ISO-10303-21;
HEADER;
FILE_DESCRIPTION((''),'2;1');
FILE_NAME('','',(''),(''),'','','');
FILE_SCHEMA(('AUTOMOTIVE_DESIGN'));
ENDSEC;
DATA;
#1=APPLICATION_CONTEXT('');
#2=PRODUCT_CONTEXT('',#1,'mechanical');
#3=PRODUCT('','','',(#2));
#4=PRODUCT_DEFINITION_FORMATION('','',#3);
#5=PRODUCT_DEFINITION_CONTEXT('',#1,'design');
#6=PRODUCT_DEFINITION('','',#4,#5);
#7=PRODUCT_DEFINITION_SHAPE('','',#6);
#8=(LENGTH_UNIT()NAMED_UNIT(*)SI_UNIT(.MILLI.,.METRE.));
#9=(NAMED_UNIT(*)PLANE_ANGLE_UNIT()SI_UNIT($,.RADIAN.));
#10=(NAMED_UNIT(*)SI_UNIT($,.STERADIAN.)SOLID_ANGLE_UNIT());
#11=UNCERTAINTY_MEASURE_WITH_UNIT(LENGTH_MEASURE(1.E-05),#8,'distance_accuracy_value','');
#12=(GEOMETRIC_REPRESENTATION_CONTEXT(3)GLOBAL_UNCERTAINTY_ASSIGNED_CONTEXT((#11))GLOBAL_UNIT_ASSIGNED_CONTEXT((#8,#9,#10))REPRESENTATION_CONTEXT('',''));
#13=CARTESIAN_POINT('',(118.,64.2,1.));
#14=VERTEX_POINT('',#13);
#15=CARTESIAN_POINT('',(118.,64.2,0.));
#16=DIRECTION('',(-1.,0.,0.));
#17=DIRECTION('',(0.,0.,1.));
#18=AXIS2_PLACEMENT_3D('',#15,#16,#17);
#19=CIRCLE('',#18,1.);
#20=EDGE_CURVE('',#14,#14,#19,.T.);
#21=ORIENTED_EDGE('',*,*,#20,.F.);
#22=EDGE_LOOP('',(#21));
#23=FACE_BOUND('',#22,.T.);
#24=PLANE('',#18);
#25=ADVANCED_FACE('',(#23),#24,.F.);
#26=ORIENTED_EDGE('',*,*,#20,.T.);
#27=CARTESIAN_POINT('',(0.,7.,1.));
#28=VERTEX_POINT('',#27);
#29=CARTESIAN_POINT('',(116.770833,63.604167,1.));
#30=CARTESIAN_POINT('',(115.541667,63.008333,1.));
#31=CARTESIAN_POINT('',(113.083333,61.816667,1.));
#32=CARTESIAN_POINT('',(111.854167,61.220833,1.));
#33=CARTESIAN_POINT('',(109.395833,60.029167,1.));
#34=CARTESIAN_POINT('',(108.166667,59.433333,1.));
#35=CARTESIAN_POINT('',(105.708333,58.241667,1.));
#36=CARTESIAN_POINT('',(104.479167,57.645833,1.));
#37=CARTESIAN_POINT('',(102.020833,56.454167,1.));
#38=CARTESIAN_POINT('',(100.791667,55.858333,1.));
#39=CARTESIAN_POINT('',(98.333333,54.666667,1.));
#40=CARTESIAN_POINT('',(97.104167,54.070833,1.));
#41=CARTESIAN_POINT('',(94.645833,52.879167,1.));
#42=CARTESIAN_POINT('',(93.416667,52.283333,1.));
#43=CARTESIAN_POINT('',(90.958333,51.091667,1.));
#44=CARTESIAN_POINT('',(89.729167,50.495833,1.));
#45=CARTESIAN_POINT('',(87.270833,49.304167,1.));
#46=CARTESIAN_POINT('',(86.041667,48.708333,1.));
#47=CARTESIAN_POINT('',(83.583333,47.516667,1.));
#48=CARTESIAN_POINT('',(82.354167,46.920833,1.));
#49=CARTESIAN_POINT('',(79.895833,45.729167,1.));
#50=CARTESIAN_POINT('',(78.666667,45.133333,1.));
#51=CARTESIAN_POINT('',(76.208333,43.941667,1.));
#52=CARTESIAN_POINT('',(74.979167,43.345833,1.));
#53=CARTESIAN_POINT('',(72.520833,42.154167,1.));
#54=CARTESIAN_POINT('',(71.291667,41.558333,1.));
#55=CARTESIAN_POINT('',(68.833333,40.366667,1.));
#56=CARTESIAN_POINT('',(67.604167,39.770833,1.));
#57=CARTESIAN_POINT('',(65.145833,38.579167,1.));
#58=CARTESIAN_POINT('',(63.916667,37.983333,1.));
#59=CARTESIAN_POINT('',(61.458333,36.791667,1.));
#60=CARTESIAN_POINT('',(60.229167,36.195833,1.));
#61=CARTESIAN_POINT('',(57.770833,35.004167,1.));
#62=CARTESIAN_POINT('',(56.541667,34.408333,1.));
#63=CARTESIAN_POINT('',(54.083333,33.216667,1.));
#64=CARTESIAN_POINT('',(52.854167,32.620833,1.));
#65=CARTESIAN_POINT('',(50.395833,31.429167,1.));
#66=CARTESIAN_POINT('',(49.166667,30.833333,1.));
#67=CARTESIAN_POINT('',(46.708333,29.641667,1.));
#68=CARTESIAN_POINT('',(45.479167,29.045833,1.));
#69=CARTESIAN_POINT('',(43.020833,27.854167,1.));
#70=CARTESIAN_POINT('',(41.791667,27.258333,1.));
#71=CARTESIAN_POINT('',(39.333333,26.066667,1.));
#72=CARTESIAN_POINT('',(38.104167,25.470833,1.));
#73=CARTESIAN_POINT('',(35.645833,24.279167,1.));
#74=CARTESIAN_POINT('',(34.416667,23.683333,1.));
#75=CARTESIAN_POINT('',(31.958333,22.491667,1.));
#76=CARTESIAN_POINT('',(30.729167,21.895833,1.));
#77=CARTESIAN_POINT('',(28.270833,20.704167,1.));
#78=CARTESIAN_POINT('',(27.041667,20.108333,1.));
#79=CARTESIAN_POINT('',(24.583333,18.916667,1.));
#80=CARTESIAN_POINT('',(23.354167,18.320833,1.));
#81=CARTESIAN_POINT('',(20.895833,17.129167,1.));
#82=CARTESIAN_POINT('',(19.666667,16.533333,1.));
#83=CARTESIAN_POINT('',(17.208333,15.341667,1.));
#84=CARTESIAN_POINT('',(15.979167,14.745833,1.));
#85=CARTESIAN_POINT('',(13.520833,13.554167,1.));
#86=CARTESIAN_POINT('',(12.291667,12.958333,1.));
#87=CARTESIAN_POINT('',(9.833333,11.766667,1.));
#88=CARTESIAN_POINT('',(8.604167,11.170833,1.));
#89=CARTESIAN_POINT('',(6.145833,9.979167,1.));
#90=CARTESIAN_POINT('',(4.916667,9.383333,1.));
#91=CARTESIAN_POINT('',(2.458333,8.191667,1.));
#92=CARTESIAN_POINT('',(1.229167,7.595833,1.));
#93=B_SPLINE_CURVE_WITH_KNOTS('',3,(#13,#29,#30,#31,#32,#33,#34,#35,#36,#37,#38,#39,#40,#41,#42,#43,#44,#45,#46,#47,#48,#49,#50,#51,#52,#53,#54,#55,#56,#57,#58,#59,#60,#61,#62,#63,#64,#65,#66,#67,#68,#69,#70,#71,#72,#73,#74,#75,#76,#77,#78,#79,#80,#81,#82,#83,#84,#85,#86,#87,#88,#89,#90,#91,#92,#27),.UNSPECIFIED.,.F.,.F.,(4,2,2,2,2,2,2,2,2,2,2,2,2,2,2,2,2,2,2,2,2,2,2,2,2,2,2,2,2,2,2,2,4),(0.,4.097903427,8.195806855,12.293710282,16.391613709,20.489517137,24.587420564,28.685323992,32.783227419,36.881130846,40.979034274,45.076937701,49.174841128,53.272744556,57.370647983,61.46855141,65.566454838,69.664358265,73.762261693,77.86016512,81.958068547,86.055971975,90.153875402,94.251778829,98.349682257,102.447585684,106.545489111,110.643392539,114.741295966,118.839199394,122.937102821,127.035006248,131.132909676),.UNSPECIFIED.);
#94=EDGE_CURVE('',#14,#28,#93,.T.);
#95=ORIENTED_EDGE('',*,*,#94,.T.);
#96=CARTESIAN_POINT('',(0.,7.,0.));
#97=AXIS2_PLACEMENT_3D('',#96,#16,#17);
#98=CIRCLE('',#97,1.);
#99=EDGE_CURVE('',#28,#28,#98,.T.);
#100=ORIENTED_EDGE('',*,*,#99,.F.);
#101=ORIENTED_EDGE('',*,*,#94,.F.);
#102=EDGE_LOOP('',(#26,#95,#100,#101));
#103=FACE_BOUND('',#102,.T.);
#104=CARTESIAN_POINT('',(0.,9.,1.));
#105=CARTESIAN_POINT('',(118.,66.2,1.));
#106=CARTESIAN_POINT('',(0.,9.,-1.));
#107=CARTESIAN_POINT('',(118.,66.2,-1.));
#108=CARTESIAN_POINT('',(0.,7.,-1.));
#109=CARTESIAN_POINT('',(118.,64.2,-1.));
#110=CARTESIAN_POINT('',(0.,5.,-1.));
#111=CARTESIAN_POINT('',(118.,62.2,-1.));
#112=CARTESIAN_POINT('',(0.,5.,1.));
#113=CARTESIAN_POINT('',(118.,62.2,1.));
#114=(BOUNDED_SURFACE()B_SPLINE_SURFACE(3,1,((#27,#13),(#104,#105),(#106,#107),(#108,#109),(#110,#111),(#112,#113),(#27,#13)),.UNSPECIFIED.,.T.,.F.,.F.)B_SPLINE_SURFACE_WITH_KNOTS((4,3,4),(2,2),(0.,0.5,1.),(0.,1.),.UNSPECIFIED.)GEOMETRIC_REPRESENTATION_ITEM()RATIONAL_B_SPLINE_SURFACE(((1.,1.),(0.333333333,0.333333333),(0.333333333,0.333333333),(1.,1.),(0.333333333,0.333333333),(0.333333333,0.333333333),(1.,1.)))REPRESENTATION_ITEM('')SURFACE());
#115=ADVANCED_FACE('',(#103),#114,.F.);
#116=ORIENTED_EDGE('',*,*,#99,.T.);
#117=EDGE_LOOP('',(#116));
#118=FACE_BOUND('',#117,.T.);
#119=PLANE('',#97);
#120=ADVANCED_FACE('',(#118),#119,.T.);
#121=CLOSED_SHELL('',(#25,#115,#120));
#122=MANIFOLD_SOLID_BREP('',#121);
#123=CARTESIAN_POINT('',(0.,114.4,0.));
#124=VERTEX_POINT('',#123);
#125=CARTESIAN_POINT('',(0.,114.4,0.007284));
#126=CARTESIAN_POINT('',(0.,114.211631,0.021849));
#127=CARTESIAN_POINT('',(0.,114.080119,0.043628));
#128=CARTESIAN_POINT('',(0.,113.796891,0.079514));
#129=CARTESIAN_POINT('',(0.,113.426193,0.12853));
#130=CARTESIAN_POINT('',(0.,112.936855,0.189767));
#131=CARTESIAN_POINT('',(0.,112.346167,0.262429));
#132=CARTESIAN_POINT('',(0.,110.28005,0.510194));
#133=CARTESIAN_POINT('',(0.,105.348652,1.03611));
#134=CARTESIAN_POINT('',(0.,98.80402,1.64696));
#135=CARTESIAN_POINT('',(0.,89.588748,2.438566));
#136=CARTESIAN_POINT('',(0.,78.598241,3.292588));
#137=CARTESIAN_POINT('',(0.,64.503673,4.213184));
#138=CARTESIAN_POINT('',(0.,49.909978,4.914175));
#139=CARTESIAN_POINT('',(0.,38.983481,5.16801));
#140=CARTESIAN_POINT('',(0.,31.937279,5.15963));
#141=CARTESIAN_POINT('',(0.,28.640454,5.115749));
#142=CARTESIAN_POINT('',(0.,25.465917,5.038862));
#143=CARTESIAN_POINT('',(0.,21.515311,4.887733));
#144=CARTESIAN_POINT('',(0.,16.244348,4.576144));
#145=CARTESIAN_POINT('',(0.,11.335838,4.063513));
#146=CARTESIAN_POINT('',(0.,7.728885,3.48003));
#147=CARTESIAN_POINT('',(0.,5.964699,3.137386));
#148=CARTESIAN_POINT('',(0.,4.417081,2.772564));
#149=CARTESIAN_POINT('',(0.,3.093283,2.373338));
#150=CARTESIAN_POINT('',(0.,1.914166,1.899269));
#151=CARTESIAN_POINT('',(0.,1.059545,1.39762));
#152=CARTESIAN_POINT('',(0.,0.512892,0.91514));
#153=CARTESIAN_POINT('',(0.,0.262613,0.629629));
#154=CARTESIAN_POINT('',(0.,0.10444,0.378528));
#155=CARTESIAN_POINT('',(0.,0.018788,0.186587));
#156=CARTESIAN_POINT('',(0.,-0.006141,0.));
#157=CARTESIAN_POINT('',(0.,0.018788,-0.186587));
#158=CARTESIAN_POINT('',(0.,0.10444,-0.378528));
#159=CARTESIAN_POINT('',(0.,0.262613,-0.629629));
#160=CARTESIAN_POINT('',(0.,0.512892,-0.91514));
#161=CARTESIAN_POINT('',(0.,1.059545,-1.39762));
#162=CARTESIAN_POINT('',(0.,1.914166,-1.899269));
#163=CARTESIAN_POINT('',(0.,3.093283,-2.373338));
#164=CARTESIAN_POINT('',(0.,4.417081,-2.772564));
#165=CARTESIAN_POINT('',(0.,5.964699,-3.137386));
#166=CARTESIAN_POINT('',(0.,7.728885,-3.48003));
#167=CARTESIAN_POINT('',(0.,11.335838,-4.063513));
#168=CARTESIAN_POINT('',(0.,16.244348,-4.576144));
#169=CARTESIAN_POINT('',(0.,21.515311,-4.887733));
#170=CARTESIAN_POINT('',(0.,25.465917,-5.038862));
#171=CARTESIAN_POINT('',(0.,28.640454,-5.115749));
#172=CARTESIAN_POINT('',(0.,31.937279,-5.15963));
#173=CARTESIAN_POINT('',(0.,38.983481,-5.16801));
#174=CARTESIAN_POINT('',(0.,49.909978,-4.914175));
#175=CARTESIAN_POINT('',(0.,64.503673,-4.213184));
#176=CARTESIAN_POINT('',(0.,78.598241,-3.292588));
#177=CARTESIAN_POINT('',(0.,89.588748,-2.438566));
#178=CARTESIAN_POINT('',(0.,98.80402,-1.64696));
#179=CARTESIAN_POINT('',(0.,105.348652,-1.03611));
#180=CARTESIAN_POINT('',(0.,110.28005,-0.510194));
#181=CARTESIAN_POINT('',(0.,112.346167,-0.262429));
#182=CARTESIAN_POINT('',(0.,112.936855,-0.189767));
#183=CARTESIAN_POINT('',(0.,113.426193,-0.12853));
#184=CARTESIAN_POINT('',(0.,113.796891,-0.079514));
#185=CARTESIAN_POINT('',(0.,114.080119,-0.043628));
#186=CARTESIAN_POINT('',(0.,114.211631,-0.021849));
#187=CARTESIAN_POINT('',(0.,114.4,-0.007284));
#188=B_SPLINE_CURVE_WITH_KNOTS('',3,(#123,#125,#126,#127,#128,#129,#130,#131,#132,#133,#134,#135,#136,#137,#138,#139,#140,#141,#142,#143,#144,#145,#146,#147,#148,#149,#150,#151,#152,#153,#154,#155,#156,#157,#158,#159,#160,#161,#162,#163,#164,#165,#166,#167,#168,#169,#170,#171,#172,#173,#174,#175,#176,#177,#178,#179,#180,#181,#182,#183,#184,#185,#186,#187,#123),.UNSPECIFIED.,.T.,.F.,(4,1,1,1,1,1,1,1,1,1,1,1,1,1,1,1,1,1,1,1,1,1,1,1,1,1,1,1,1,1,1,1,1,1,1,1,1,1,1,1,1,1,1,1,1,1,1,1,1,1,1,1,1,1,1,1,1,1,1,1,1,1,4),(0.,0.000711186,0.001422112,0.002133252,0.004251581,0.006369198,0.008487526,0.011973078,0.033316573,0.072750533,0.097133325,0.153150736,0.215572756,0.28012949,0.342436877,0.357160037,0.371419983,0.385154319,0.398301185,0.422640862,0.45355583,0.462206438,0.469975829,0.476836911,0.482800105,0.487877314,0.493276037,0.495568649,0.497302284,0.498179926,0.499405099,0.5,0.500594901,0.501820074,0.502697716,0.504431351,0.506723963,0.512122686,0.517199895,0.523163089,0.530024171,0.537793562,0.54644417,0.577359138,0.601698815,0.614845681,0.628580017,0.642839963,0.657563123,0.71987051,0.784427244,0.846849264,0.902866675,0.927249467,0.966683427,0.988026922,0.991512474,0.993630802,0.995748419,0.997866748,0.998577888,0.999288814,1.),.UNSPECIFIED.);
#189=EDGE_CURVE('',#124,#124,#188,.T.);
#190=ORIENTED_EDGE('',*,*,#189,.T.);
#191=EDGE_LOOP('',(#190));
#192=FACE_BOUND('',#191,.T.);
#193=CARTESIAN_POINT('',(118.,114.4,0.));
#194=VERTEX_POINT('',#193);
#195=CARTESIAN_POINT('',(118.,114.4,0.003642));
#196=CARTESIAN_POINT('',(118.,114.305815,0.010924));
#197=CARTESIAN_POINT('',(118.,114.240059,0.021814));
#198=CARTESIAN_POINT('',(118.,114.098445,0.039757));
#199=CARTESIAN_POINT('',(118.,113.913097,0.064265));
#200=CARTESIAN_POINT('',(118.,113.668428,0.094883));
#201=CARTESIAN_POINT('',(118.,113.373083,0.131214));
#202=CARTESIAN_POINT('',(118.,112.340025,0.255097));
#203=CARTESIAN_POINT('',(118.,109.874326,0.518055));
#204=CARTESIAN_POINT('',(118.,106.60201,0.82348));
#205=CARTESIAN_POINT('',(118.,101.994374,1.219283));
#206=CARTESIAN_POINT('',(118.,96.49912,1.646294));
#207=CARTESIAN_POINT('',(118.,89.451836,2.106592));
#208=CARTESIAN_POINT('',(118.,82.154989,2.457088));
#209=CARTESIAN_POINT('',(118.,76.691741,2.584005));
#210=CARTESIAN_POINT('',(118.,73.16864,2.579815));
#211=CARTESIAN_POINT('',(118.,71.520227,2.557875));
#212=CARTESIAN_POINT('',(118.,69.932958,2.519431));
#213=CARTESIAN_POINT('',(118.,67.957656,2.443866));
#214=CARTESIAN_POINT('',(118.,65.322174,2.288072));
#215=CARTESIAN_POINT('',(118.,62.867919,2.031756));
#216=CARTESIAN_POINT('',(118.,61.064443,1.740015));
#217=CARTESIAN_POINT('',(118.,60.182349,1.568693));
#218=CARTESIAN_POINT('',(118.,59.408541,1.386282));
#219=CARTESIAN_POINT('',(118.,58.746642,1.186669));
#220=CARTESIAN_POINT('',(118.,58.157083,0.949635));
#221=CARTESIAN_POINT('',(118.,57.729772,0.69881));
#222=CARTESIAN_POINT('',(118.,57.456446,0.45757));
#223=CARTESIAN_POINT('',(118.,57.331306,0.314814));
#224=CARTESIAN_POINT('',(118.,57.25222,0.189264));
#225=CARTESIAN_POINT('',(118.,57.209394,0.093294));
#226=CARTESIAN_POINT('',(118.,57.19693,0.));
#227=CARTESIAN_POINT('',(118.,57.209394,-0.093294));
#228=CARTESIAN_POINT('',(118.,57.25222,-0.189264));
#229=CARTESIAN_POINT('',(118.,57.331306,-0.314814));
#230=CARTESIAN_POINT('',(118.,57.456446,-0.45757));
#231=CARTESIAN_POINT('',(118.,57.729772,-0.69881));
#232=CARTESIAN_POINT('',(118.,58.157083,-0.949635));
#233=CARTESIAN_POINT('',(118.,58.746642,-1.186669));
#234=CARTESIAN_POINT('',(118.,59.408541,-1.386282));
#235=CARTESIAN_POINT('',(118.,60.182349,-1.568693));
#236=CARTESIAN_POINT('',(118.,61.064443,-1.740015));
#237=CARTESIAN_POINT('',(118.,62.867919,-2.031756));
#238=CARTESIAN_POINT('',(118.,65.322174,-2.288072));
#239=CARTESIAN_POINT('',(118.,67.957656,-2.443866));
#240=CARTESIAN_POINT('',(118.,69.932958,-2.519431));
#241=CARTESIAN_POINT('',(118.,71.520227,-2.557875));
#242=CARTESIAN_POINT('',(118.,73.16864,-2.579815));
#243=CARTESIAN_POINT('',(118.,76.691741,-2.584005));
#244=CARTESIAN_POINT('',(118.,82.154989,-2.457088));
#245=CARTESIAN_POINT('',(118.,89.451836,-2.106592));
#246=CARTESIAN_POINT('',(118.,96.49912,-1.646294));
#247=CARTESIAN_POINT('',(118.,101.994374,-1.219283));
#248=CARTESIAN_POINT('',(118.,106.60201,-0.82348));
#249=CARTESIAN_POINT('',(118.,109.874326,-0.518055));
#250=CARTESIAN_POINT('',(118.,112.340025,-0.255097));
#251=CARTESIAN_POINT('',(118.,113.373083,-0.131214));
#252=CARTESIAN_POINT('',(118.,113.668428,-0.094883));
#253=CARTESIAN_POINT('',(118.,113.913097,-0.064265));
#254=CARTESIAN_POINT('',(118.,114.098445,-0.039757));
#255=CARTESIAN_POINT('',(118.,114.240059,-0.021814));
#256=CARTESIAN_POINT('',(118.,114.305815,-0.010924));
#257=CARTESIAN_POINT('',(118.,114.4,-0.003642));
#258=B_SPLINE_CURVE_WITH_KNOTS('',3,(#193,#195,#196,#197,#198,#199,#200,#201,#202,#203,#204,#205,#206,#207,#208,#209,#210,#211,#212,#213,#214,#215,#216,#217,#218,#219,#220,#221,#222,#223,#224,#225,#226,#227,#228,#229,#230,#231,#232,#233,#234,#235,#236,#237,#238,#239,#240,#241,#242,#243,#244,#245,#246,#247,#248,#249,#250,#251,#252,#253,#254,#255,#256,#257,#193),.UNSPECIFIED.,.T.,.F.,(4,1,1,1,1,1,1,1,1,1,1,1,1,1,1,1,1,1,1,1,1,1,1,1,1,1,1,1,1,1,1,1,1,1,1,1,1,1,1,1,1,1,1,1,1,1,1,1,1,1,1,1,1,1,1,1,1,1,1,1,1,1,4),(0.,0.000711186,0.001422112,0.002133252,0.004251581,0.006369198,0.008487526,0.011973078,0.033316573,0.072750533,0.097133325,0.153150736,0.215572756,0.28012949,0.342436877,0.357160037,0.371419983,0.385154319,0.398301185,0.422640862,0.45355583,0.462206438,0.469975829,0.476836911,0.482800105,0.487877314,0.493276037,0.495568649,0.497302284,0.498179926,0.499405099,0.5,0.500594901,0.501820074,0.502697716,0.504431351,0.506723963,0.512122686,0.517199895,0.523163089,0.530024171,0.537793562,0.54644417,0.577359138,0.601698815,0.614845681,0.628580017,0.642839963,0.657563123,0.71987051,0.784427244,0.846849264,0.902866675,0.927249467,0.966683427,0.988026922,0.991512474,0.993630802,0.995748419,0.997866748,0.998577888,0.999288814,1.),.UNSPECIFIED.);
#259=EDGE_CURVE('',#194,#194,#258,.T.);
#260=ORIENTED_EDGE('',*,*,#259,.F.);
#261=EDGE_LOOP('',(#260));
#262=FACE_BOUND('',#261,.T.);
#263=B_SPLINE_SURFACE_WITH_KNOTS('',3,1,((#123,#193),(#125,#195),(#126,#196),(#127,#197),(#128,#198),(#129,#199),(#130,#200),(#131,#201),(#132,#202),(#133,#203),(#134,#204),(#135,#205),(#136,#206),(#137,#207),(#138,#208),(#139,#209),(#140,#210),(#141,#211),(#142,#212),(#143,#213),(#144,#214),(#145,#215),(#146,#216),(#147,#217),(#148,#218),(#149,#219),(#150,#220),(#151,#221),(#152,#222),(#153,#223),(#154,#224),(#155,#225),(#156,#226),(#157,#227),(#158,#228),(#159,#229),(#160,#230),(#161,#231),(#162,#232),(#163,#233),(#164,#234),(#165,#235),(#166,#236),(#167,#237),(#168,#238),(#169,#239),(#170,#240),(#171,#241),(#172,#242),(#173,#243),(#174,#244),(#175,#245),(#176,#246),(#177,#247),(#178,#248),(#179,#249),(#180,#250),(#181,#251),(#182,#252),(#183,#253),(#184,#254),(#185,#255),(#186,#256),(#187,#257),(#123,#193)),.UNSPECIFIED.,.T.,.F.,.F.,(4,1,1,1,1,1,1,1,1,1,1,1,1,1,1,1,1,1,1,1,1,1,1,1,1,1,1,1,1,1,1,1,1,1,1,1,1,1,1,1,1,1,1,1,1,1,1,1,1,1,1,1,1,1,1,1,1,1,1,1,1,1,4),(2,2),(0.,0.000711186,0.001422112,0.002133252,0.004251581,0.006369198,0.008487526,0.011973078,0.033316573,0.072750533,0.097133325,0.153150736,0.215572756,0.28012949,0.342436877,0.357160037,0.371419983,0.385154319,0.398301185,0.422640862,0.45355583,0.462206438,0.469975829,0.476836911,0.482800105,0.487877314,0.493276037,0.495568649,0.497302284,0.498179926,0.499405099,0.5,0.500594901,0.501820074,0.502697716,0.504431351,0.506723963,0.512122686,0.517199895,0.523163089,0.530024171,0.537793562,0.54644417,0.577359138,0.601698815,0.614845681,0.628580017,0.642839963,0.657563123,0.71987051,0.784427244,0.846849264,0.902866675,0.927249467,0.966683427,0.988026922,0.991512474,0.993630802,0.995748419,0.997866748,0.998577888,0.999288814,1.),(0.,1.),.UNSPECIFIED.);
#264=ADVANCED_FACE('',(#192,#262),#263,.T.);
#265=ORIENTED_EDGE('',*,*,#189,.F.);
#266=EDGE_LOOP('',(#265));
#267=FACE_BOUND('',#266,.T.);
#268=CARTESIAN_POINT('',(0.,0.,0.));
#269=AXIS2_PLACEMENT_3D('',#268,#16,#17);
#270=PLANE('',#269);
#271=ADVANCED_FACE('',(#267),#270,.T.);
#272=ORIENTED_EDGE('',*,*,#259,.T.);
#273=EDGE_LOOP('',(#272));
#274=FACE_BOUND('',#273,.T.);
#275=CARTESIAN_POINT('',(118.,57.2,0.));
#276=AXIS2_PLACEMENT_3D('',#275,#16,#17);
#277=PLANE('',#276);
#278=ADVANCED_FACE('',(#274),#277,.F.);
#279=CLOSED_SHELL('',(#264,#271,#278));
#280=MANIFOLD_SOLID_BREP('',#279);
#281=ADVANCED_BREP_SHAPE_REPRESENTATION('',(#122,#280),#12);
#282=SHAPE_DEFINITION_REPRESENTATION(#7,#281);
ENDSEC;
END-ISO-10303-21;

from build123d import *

# Parameters (mm, degrees)
SKETCH_7_R = 1


with BuildPart() as part:
    # 边界1: read off the stored shape, not the designer's step
    # 边界1: loft between two sections, ruled curve by curve
    other_1_from = [
        Edge.make_bspline([(0, 114.4, 0), (0, 114.4, 0.007283832), (0, 114.21163069, 0.021848837), (0, 114.080118647, 0.043628247), (0, 113.796890955, 0.079514286), (0, 113.426193351, 0.128529824), (0, 112.936855294, 0.18976694), (0, 112.346167, 0.26242899), (0, 110.280049708, 0.51019447), (0, 105.348652112, 1.036109846), (0, 98.804019609, 1.646960293), (0, 89.588748002, 2.438566234), (0, 78.598240942, 3.29258827), (0, 64.503672569, 4.213184102), (0, 49.909977833, 4.914175355), (0, 38.983481039, 5.16800985), (0, 31.937279333, 5.159629577), (0, 28.640454039, 5.115749057), (0, 25.465916509, 5.038861572), (0, 21.515311132, 4.887732663), (0, 16.244348489, 4.576144308), (0, 11.335837752, 4.063512647), (0, 7.728885363, 3.480029887), (0, 5.964698517, 3.137385513), (0, 4.417081382, 2.772564157), (0, 3.093283382, 2.373338217), (0, 1.914166214, 1.899269319), (0, 1.059544765, 1.397620101), (0, 0.512892323, 0.915140017), (0, 0.262612741, 0.629628981), (0, 0.104439841, 0.378528288), (0, 0.018787658, 0.186587242), (0, -0.00614085, 0), (0, 0.018787658, -0.186587242), (0, 0.104439841, -0.378528288), (0, 0.262612741, -0.629628981), (0, 0.512892323, -0.915140017), (0, 1.059544765, -1.397620101), (0, 1.914166214, -1.899269319), (0, 3.093283382, -2.373338217), (0, 4.417081382, -2.772564157), (0, 5.964698517, -3.137385513), (0, 7.728885363, -3.480029887), (0, 11.335837752, -4.063512647), (0, 16.244348489, -4.576144308), (0, 21.515311132, -4.887732663), (0, 25.465916509, -5.038861572), (0, 28.640454039, -5.115749057), (0, 31.937279333, -5.159629577), (0, 38.983481039, -5.16800985), (0, 49.909977833, -4.914175355), (0, 64.503672569, -4.213184102), (0, 78.598240942, -3.29258827), (0, 89.588748002, -2.438566234), (0, 98.804019609, -1.646960293), (0, 105.348652112, -1.036109846), (0, 110.280049708, -0.51019447), (0, 112.346167, -0.26242899), (0, 112.936855294, -0.18976694), (0, 113.426193351, -0.128529824), (0, 113.796890955, -0.079514286), (0, 114.080118647, -0.043628247), (0, 114.21163069, -0.021848837), (0, 114.4, -0.007283832), (0, 114.4, 0)], [0, 0, 0, 0, 0.000711186, 0.001422112, 0.002133252, 0.004251581, 0.006369198, 0.008487526, 0.011973078, 0.033316573, 0.072750533, 0.097133325, 0.153150736, 0.215572756, 0.28012949, 0.342436877, 0.357160037, 0.371419983, 0.385154319, 0.398301185, 0.422640862, 0.45355583, 0.462206438, 0.469975829, 0.476836911, 0.482800105, 0.487877314, 0.493276037, 0.495568649, 0.497302284, 0.498179926, 0.499405099, 0.5, 0.500594901, 0.501820074, 0.502697716, 0.504431351, 0.506723963, 0.512122686, 0.517199895, 0.523163089, 0.530024171, 0.537793562, 0.54644417, 0.577359138, 0.601698815, 0.614845681, 0.628580017, 0.642839963, 0.657563123, 0.71987051, 0.784427244, 0.846849264, 0.902866675, 0.927249467, 0.966683427, 0.988026922, 0.991512474, 0.993630802, 0.995748419, 0.997866748, 0.998577888, 0.999288814, 1, 1, 1, 1], 3),
    ]
    other_1_to = [
        Edge.make_bspline([(118, 114.4, 0), (118, 114.4, 0.003641916), (118, 114.305815345, 0.010924418), (118, 114.240059323, 0.021814123), (118, 114.098445477, 0.039757143), (118, 113.913096675, 0.064264912), (118, 113.668427647, 0.09488347), (118, 113.3730835, 0.131214495), (118, 112.340024854, 0.255097235), (118, 109.874326056, 0.518054923), (118, 106.602009805, 0.823480147), (118, 101.994374001, 1.219283117), (118, 96.499120471, 1.646294135), (118, 89.451836285, 2.106592051), (118, 82.154988917, 2.457087677), (118, 76.69174052, 2.584004925), (118, 73.168639667, 2.579814789), (118, 71.520227019, 2.557874528), (118, 69.932958254, 2.519430786), (118, 67.957655566, 2.443866331), (118, 65.322174244, 2.288072154), (118, 62.867918876, 2.031756324), (118, 61.064442682, 1.740014943), (118, 60.182349259, 1.568692756), (118, 59.408540691, 1.386282078), (118, 58.746641691, 1.186669108), (118, 58.157083107, 0.949634659), (118, 57.729772382, 0.698810051), (118, 57.456446161, 0.457570009), (118, 57.33130637, 0.314814491), (118, 57.252219921, 0.189264144), (118, 57.209393829, 0.093293621), (118, 57.196929575, 0), (118, 57.209393829, -0.093293621), (118, 57.252219921, -0.189264144), (118, 57.33130637, -0.314814491), (118, 57.456446161, -0.457570009), (118, 57.729772382, -0.698810051), (118, 58.157083107, -0.949634659), (118, 58.746641691, -1.186669108), (118, 59.408540691, -1.386282078), (118, 60.182349259, -1.568692756), (118, 61.064442682, -1.740014943), (118, 62.867918876, -2.031756324), (118, 65.322174244, -2.288072154), (118, 67.957655566, -2.443866331), (118, 69.932958254, -2.519430786), (118, 71.520227019, -2.557874528), (118, 73.168639667, -2.579814789), (118, 76.69174052, -2.584004925), (118, 82.154988917, -2.457087677), (118, 89.451836285, -2.106592051), (118, 96.499120471, -1.646294135), (118, 101.994374001, -1.219283117), (118, 106.602009805, -0.823480147), (118, 109.874326056, -0.518054923), (118, 112.340024854, -0.255097235), (118, 113.3730835, -0.131214495), (118, 113.668427647, -0.09488347), (118, 113.913096675, -0.064264912), (118, 114.098445477, -0.039757143), (118, 114.240059323, -0.021814123), (118, 114.305815345, -0.010924418), (118, 114.4, -0.003641916), (118, 114.4, 0)], [0, 0, 0, 0, 0.000711186, 0.001422112, 0.002133252, 0.004251581, 0.006369198, 0.008487526, 0.011973078, 0.033316573, 0.072750533, 0.097133325, 0.153150736, 0.215572756, 0.28012949, 0.342436877, 0.357160037, 0.371419983, 0.385154319, 0.398301185, 0.422640862, 0.45355583, 0.462206438, 0.469975829, 0.476836911, 0.482800105, 0.487877314, 0.493276037, 0.495568649, 0.497302284, 0.498179926, 0.499405099, 0.5, 0.500594901, 0.501820074, 0.502697716, 0.504431351, 0.506723963, 0.512122686, 0.517199895, 0.523163089, 0.530024171, 0.537793562, 0.54644417, 0.577359138, 0.601698815, 0.614845681, 0.628580017, 0.642839963, 0.657563123, 0.71987051, 0.784427244, 0.846849264, 0.902866675, 0.927249467, 0.966683427, 0.988026922, 0.991512474, 0.993630802, 0.995748419, 0.997866748, 0.998577888, 0.999288814, 1, 1, 1, 1], 3),
    ]
    other_1 = Solid(Shell([*[Face.make_surface_from_curves(other_1_from[k], other_1_to[k]) for k in range(1)], Face(Wire(other_1_from)), Face(Wire(other_1_to))]))
    add(other_1)


with BuildPart() as body_2:
    # 扫描1: sweep along a path in 草图6
    with BuildLine(Plane.XY) as sweep_1_path:
        Line((0, -20), (118, 37.2))
    # 草图7 → 扫描1 (sweep)
    with BuildSketch(Plane.ZY):
        with Locations((0, 7)):
            Circle(SKETCH_7_R)
    sweep(path=sweep_1_path.line)


solid = Compound([part.part, body_2.part])
